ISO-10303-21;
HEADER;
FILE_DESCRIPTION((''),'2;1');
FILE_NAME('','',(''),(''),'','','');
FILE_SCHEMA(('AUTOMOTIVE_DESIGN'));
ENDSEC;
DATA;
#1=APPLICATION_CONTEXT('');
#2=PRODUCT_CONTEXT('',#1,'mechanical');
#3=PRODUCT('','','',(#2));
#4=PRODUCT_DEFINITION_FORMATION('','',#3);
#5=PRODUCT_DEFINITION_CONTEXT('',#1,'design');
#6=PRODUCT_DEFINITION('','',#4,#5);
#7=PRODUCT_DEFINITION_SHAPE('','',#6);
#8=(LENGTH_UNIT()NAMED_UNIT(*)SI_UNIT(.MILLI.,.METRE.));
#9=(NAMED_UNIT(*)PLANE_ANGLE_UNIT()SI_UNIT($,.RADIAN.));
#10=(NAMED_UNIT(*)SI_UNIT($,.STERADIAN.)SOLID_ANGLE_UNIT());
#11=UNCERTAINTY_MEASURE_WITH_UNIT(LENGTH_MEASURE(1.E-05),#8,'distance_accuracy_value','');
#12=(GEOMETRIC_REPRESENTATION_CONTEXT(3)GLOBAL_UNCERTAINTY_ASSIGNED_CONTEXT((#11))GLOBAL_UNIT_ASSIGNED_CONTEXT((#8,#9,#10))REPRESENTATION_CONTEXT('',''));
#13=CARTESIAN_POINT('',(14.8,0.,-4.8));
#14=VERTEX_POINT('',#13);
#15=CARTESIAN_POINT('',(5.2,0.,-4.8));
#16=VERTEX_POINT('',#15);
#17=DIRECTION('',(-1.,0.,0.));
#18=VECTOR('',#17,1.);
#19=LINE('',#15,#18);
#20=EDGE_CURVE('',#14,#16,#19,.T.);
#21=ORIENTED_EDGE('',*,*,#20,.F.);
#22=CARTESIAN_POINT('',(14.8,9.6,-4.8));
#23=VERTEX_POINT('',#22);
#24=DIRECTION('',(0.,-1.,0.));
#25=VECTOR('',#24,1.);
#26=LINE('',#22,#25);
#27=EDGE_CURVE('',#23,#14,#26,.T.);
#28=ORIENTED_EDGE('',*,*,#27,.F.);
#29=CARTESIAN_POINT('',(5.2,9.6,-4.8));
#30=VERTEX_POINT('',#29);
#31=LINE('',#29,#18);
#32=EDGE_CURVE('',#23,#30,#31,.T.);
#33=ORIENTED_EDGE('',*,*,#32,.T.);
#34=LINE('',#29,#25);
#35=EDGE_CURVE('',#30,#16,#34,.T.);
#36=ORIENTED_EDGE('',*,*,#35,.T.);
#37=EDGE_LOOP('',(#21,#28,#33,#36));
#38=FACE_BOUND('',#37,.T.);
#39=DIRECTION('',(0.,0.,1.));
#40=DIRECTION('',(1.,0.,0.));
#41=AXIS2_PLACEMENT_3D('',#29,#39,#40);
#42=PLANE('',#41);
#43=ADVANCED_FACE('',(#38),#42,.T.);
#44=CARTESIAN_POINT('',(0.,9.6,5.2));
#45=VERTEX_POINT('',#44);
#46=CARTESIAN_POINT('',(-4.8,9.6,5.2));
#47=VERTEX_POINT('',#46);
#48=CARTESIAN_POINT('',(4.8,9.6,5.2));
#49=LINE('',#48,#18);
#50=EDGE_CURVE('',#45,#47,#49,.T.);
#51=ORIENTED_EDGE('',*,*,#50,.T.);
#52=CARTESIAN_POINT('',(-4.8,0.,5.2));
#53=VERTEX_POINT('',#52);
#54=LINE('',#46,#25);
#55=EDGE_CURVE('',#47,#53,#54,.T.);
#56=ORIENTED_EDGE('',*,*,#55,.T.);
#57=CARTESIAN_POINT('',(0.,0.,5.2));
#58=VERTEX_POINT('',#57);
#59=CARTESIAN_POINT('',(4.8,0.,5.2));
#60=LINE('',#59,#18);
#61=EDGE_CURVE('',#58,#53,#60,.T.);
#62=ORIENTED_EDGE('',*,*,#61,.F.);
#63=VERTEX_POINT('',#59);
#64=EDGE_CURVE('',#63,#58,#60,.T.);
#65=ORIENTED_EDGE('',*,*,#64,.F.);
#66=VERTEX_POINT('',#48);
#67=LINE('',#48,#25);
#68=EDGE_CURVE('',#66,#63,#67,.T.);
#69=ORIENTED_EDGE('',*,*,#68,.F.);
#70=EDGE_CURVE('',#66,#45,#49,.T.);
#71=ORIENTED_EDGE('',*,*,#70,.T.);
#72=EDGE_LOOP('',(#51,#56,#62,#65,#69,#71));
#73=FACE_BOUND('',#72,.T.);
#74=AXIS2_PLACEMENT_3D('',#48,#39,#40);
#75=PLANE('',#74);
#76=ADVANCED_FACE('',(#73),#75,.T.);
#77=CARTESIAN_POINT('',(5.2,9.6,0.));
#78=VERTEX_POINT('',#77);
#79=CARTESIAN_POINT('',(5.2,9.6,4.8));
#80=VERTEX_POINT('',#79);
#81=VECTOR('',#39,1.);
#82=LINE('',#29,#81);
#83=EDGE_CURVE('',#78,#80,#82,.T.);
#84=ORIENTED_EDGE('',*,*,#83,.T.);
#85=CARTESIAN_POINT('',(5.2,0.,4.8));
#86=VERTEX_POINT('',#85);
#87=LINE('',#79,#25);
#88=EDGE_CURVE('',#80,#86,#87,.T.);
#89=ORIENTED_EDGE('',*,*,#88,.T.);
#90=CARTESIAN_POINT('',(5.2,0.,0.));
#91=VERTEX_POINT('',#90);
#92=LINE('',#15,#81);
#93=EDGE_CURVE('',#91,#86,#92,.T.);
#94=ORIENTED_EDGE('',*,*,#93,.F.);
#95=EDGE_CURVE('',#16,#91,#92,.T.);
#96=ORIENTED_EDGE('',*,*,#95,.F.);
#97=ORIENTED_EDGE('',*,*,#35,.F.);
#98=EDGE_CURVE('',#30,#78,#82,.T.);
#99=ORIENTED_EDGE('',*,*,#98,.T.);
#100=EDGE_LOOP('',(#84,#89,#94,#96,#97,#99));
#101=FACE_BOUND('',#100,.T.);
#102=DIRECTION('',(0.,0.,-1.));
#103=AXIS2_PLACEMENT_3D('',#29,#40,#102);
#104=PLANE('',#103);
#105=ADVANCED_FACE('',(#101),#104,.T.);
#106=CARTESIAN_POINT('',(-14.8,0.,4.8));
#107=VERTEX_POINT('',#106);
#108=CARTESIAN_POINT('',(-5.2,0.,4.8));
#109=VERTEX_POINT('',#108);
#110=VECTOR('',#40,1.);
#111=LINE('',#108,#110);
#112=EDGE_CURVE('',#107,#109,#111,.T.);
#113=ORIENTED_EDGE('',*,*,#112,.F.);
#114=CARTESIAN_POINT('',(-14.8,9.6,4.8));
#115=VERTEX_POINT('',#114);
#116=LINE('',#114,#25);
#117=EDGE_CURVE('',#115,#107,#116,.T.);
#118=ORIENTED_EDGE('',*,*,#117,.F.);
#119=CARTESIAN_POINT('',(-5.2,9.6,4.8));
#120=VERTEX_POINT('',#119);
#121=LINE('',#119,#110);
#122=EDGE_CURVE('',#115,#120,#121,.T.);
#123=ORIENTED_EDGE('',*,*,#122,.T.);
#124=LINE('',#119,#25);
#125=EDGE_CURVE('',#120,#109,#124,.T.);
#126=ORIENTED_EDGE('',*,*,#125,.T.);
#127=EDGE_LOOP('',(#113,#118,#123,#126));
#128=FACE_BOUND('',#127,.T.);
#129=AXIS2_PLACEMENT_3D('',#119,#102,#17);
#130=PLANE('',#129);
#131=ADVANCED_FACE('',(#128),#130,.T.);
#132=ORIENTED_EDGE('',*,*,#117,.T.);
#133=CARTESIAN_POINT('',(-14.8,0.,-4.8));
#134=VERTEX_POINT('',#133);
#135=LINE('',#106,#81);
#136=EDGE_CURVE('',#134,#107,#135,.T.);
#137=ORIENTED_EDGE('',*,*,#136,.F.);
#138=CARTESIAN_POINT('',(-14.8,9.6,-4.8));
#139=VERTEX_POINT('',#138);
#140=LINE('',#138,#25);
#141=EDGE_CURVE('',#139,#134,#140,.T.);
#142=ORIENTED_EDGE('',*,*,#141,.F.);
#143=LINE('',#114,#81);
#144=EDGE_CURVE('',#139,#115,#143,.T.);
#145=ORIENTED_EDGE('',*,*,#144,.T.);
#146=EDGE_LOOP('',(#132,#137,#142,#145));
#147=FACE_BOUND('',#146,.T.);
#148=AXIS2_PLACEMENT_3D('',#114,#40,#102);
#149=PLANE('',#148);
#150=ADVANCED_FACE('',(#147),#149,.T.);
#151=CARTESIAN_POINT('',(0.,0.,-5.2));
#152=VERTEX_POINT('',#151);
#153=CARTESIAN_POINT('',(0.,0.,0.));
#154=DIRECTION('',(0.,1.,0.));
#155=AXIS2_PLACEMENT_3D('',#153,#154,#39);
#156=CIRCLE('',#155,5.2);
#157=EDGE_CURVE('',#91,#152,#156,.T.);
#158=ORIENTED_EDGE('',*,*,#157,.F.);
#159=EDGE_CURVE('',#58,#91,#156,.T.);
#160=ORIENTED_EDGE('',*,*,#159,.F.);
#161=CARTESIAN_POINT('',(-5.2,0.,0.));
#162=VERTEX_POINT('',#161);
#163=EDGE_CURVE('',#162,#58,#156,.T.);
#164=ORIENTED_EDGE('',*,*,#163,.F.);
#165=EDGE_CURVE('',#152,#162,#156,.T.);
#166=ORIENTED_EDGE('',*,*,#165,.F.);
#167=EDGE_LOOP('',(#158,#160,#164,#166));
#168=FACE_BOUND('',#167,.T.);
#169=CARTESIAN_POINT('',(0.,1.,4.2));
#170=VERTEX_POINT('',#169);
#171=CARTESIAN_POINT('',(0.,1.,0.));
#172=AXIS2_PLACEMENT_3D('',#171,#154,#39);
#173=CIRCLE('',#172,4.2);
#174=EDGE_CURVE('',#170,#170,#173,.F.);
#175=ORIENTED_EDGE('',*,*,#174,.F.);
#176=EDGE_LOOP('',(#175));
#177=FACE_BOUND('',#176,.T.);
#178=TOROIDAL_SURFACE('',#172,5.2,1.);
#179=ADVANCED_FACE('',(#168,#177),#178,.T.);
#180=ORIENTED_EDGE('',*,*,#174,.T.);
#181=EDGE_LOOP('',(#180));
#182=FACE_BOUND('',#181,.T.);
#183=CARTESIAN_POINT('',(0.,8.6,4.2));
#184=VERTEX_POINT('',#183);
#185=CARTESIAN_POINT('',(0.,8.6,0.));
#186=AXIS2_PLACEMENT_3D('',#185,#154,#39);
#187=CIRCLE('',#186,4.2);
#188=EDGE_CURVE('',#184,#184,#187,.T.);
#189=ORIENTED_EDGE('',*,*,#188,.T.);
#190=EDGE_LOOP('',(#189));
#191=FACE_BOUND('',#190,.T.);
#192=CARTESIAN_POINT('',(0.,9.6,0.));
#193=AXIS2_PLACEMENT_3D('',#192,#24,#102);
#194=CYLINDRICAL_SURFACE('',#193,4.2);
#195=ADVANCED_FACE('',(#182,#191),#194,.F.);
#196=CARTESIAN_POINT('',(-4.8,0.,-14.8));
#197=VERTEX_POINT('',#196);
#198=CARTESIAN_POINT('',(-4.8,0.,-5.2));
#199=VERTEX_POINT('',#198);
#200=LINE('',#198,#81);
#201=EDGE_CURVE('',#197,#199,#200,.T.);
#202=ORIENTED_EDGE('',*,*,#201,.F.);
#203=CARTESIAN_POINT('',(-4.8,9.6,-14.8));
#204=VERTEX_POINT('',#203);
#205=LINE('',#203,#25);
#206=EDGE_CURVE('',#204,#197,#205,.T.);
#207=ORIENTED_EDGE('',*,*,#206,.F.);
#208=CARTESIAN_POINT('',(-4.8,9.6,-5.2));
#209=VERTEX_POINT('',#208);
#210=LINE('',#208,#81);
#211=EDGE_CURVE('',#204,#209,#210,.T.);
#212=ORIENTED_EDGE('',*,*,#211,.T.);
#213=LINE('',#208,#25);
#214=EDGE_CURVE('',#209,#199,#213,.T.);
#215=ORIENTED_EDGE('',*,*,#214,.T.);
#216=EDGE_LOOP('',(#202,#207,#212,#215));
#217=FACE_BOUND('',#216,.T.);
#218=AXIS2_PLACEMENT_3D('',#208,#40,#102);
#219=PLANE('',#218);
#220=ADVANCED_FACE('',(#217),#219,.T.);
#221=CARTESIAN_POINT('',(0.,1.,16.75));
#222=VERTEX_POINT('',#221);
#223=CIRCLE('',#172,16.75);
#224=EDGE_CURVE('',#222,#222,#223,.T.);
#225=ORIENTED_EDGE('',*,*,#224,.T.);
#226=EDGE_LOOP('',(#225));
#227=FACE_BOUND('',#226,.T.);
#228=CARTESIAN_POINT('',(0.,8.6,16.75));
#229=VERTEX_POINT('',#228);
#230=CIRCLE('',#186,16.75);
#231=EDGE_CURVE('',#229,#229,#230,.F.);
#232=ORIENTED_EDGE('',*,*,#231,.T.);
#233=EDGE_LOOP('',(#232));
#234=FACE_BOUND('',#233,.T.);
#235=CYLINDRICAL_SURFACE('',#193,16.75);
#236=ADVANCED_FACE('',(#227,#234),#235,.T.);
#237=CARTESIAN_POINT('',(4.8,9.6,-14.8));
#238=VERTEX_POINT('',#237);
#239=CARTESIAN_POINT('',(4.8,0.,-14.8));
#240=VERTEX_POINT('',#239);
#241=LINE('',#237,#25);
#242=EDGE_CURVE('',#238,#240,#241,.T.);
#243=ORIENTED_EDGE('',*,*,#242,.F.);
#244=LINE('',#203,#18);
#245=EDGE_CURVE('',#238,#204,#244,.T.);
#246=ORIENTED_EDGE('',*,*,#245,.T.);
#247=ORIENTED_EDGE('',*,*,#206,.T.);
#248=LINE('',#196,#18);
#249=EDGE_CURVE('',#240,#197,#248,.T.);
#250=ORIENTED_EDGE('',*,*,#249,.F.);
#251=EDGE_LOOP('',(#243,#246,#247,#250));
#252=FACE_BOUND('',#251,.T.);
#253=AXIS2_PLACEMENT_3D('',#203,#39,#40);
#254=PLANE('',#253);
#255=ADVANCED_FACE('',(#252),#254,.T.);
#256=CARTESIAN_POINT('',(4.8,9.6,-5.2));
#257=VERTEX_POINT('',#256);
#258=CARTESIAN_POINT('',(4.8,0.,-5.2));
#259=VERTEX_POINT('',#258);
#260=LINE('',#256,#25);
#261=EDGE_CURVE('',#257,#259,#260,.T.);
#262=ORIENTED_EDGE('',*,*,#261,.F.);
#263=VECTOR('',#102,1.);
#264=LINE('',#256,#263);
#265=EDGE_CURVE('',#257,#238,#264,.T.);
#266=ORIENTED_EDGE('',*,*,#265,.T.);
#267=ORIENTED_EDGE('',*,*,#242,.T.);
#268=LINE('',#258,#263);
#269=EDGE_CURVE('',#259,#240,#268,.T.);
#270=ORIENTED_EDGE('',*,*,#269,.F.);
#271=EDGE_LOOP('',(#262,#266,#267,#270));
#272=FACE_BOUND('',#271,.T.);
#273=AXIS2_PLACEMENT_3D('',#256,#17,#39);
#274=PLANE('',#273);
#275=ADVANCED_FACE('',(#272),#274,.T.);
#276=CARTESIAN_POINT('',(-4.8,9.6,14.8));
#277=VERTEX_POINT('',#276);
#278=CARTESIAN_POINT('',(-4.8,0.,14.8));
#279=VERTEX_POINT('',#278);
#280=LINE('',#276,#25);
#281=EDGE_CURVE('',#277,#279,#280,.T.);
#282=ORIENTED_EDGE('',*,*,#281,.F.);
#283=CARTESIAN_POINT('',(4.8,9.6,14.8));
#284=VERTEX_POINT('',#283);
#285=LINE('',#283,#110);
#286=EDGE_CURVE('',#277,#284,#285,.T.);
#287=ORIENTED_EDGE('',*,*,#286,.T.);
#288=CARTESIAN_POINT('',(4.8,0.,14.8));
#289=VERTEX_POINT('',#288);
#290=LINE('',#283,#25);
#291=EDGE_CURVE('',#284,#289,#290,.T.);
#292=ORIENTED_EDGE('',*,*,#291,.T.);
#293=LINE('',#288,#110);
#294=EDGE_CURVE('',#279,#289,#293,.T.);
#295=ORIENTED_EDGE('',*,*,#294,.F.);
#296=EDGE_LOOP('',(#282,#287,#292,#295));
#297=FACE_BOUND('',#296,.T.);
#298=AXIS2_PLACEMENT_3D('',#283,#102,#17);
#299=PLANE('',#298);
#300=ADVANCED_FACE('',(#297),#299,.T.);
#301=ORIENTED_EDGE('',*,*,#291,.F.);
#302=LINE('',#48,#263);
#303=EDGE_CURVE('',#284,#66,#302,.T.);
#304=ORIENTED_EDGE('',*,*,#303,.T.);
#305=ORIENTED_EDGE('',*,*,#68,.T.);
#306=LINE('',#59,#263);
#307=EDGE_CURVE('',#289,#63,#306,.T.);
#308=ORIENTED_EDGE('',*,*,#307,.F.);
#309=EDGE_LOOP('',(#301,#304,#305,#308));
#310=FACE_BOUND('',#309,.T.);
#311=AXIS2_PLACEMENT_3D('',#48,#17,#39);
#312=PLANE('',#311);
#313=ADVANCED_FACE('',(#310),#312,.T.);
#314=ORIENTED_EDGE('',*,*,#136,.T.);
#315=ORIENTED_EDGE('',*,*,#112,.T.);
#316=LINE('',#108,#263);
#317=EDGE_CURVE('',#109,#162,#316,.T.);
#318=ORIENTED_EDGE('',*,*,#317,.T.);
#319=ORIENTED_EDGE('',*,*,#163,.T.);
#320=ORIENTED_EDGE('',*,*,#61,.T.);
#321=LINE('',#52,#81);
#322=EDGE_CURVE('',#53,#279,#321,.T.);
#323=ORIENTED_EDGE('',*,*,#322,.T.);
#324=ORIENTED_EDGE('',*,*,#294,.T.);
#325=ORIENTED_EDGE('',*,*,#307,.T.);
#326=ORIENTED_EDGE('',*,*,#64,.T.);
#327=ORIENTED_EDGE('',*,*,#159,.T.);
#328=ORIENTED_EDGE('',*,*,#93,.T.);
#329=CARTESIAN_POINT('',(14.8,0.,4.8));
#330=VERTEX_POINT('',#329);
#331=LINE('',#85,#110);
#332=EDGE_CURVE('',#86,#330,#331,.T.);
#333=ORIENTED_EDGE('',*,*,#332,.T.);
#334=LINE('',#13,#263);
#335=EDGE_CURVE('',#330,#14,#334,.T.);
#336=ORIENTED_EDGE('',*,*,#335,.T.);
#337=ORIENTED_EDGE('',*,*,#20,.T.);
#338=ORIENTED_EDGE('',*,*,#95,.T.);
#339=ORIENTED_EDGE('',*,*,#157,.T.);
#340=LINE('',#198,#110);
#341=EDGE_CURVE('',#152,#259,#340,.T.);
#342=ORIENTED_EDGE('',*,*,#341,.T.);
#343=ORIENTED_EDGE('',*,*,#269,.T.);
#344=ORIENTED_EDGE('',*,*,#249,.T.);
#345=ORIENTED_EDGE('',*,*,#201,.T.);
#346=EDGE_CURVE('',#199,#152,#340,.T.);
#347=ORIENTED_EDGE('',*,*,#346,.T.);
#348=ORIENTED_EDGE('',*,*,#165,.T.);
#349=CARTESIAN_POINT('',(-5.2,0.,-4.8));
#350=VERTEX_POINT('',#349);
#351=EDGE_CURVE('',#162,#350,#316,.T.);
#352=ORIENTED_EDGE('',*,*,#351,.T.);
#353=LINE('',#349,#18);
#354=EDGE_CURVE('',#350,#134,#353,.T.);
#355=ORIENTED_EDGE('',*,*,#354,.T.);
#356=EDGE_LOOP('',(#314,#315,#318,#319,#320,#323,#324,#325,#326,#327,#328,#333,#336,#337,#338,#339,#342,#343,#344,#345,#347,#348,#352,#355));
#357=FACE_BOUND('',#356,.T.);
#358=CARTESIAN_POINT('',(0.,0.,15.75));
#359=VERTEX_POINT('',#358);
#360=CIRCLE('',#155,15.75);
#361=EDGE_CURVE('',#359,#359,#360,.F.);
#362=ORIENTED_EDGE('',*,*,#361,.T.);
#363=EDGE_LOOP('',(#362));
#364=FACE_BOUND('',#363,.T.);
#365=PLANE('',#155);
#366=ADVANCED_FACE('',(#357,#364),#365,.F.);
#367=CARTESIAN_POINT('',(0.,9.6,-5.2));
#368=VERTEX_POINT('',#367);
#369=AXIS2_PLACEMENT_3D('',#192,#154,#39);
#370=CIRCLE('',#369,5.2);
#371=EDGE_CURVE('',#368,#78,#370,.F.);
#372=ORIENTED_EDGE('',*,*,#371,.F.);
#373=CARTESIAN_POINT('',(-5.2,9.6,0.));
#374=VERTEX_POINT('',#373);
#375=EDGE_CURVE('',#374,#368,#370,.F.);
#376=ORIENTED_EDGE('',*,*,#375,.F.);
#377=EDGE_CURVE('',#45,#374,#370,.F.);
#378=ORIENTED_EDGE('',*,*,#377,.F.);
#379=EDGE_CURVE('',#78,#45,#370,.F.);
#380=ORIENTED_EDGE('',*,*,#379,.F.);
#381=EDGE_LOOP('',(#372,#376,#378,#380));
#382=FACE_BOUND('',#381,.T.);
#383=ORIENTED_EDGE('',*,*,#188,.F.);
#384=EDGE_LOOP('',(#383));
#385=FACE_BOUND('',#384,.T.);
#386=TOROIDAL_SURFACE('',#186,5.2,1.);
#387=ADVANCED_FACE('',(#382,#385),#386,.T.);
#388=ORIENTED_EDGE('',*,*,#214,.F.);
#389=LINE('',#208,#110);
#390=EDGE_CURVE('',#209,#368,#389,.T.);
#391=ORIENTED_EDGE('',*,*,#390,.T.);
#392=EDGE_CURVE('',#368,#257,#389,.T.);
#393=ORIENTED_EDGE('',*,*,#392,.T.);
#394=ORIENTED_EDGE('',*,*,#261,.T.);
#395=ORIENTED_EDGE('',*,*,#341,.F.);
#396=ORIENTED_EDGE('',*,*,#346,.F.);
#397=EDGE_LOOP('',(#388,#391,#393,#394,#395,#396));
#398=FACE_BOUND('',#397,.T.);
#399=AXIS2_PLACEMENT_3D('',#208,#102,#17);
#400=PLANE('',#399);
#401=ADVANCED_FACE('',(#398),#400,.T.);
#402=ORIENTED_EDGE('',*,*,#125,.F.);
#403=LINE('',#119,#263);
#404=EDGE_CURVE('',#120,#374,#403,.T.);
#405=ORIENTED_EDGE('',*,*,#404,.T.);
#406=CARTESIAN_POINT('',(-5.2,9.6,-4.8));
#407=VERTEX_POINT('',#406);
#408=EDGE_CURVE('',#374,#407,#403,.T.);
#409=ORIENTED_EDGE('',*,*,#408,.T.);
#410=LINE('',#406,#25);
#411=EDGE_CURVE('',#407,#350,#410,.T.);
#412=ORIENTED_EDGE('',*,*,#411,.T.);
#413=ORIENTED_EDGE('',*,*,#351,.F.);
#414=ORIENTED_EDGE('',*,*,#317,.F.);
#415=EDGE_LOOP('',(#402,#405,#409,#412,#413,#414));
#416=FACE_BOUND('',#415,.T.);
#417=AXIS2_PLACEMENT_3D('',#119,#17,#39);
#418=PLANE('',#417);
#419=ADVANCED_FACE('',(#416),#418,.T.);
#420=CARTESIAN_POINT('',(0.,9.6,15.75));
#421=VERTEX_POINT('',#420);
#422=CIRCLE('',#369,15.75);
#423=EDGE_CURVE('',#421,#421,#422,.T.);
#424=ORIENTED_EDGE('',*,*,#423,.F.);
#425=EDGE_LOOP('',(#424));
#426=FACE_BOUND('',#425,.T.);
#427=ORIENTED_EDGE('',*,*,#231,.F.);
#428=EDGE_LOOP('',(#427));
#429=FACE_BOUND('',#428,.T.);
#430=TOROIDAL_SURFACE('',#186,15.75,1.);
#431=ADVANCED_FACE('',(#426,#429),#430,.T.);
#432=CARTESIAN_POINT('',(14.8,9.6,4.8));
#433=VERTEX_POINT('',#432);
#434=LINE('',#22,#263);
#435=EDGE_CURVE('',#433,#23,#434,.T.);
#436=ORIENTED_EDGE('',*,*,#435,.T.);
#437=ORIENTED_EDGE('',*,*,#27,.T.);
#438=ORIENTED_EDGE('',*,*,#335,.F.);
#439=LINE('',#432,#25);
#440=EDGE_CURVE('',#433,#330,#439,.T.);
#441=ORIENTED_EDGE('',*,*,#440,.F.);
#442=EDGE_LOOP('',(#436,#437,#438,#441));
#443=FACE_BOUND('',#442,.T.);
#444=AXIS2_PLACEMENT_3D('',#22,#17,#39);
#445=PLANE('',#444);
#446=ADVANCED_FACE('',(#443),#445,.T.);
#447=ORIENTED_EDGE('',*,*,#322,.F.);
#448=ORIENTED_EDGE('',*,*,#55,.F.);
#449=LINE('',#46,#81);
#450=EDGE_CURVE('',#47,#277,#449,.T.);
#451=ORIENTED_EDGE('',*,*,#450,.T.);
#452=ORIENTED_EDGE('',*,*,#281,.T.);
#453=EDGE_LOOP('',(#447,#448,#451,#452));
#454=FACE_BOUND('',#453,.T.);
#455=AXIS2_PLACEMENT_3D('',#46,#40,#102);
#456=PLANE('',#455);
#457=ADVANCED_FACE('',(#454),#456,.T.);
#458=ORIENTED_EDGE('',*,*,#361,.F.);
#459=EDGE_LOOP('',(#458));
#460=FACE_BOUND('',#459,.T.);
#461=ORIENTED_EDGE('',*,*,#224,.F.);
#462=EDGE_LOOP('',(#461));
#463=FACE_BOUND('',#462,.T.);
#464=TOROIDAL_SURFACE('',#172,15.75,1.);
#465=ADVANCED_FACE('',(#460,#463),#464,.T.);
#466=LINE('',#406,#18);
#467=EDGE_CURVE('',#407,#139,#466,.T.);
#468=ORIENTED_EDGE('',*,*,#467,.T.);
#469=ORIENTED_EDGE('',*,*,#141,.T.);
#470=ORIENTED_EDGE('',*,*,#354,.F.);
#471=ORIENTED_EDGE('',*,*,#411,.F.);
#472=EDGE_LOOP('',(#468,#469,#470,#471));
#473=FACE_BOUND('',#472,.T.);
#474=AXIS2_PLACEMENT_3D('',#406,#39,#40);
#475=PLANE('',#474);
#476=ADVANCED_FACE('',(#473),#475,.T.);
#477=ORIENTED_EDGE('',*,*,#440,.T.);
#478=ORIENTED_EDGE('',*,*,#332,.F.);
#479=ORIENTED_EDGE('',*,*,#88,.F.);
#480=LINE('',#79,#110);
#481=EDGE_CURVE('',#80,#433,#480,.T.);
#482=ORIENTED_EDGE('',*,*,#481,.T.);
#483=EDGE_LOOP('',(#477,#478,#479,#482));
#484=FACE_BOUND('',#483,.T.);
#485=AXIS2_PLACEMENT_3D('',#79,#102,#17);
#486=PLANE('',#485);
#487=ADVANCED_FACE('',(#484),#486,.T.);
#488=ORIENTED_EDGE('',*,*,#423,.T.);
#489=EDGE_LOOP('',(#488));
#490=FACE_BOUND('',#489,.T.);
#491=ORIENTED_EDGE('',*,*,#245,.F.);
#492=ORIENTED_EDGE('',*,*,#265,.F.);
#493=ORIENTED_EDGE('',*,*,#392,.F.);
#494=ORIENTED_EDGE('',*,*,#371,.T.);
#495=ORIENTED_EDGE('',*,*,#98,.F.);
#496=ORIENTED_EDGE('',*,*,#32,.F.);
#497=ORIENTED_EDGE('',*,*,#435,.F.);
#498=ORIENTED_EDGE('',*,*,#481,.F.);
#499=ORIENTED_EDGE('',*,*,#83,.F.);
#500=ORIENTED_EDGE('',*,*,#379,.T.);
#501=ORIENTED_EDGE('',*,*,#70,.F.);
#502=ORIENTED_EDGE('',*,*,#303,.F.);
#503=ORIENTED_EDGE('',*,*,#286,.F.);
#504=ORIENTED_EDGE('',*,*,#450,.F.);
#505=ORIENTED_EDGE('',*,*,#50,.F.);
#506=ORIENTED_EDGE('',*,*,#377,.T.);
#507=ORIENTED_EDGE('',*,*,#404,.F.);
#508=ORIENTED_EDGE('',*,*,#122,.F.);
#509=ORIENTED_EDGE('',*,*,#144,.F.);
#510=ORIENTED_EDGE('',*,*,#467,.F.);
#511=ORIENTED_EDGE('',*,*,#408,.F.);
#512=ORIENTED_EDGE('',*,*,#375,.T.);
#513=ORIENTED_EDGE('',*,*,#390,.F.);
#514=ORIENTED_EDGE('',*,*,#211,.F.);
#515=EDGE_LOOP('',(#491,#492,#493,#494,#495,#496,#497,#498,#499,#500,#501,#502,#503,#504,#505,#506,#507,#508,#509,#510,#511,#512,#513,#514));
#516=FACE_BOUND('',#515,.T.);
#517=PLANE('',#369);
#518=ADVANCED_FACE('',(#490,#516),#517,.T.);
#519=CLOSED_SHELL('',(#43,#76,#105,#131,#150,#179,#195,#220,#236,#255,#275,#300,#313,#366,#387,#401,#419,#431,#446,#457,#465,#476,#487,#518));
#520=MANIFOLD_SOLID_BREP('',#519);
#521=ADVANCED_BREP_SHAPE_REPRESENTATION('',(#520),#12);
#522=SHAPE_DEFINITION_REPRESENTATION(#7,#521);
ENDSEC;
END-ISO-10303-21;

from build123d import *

# Parameters (mm, degrees)
SKIZZE1_R                       = 16.75
SKIZZE1_R_2                     = 4.2
SKIZZE1_W                       = 9.6
SKIZZE1_H                       = 9.6
AUFSATZ_LINEAR_AUSTRAGEN1_DEPTH = 9.6
VERRUNDUNG1_R                   = 1


with BuildPart() as part:
    # Skizze1 → Aufsatz-Linear austragen1 (new body)
    with BuildSketch(Plane(origin=(0, 0, 0), x_dir=(1, 0, 0), z_dir=(0, 1, 0))):
        with Locations(Location((0, 0, 0), (0, 0, 270))):
            Circle(SKIZZE1_R)
        with Locations(Location((0, 0, 0), (0, 0, 270))):
            Circle(SKIZZE1_R_2, mode=Mode.SUBTRACT)
        with Locations((0, 10)):
            Rectangle(SKIZZE1_W, SKIZZE1_H, mode=Mode.SUBTRACT)
        with Locations((10, 0)):
            Rectangle(SKIZZE1_W, SKIZZE1_H, mode=Mode.SUBTRACT)
        with Locations((0, -10)):
            Rectangle(SKIZZE1_W, SKIZZE1_H, mode=Mode.SUBTRACT)
        with Locations((-10, 0)):
            Rectangle(SKIZZE1_W, SKIZZE1_H, mode=Mode.SUBTRACT)
    extrude(amount=AUFSATZ_LINEAR_AUSTRAGEN1_DEPTH)

    # Verrundung1
    verrundung1_edges = [part.edges().sort_by_distance(p)[0] for p in [
        (0, 0, -4.2),
        (0, 9.6, -4.2),
        (0, 0, -16.75),
        (0, 9.6, -16.75),
    ]]
    fillet(verrundung1_edges, radius=VERRUNDUNG1_R - 0.0001)  # a hair under: the kernel refuses the full size


solid = part.part
